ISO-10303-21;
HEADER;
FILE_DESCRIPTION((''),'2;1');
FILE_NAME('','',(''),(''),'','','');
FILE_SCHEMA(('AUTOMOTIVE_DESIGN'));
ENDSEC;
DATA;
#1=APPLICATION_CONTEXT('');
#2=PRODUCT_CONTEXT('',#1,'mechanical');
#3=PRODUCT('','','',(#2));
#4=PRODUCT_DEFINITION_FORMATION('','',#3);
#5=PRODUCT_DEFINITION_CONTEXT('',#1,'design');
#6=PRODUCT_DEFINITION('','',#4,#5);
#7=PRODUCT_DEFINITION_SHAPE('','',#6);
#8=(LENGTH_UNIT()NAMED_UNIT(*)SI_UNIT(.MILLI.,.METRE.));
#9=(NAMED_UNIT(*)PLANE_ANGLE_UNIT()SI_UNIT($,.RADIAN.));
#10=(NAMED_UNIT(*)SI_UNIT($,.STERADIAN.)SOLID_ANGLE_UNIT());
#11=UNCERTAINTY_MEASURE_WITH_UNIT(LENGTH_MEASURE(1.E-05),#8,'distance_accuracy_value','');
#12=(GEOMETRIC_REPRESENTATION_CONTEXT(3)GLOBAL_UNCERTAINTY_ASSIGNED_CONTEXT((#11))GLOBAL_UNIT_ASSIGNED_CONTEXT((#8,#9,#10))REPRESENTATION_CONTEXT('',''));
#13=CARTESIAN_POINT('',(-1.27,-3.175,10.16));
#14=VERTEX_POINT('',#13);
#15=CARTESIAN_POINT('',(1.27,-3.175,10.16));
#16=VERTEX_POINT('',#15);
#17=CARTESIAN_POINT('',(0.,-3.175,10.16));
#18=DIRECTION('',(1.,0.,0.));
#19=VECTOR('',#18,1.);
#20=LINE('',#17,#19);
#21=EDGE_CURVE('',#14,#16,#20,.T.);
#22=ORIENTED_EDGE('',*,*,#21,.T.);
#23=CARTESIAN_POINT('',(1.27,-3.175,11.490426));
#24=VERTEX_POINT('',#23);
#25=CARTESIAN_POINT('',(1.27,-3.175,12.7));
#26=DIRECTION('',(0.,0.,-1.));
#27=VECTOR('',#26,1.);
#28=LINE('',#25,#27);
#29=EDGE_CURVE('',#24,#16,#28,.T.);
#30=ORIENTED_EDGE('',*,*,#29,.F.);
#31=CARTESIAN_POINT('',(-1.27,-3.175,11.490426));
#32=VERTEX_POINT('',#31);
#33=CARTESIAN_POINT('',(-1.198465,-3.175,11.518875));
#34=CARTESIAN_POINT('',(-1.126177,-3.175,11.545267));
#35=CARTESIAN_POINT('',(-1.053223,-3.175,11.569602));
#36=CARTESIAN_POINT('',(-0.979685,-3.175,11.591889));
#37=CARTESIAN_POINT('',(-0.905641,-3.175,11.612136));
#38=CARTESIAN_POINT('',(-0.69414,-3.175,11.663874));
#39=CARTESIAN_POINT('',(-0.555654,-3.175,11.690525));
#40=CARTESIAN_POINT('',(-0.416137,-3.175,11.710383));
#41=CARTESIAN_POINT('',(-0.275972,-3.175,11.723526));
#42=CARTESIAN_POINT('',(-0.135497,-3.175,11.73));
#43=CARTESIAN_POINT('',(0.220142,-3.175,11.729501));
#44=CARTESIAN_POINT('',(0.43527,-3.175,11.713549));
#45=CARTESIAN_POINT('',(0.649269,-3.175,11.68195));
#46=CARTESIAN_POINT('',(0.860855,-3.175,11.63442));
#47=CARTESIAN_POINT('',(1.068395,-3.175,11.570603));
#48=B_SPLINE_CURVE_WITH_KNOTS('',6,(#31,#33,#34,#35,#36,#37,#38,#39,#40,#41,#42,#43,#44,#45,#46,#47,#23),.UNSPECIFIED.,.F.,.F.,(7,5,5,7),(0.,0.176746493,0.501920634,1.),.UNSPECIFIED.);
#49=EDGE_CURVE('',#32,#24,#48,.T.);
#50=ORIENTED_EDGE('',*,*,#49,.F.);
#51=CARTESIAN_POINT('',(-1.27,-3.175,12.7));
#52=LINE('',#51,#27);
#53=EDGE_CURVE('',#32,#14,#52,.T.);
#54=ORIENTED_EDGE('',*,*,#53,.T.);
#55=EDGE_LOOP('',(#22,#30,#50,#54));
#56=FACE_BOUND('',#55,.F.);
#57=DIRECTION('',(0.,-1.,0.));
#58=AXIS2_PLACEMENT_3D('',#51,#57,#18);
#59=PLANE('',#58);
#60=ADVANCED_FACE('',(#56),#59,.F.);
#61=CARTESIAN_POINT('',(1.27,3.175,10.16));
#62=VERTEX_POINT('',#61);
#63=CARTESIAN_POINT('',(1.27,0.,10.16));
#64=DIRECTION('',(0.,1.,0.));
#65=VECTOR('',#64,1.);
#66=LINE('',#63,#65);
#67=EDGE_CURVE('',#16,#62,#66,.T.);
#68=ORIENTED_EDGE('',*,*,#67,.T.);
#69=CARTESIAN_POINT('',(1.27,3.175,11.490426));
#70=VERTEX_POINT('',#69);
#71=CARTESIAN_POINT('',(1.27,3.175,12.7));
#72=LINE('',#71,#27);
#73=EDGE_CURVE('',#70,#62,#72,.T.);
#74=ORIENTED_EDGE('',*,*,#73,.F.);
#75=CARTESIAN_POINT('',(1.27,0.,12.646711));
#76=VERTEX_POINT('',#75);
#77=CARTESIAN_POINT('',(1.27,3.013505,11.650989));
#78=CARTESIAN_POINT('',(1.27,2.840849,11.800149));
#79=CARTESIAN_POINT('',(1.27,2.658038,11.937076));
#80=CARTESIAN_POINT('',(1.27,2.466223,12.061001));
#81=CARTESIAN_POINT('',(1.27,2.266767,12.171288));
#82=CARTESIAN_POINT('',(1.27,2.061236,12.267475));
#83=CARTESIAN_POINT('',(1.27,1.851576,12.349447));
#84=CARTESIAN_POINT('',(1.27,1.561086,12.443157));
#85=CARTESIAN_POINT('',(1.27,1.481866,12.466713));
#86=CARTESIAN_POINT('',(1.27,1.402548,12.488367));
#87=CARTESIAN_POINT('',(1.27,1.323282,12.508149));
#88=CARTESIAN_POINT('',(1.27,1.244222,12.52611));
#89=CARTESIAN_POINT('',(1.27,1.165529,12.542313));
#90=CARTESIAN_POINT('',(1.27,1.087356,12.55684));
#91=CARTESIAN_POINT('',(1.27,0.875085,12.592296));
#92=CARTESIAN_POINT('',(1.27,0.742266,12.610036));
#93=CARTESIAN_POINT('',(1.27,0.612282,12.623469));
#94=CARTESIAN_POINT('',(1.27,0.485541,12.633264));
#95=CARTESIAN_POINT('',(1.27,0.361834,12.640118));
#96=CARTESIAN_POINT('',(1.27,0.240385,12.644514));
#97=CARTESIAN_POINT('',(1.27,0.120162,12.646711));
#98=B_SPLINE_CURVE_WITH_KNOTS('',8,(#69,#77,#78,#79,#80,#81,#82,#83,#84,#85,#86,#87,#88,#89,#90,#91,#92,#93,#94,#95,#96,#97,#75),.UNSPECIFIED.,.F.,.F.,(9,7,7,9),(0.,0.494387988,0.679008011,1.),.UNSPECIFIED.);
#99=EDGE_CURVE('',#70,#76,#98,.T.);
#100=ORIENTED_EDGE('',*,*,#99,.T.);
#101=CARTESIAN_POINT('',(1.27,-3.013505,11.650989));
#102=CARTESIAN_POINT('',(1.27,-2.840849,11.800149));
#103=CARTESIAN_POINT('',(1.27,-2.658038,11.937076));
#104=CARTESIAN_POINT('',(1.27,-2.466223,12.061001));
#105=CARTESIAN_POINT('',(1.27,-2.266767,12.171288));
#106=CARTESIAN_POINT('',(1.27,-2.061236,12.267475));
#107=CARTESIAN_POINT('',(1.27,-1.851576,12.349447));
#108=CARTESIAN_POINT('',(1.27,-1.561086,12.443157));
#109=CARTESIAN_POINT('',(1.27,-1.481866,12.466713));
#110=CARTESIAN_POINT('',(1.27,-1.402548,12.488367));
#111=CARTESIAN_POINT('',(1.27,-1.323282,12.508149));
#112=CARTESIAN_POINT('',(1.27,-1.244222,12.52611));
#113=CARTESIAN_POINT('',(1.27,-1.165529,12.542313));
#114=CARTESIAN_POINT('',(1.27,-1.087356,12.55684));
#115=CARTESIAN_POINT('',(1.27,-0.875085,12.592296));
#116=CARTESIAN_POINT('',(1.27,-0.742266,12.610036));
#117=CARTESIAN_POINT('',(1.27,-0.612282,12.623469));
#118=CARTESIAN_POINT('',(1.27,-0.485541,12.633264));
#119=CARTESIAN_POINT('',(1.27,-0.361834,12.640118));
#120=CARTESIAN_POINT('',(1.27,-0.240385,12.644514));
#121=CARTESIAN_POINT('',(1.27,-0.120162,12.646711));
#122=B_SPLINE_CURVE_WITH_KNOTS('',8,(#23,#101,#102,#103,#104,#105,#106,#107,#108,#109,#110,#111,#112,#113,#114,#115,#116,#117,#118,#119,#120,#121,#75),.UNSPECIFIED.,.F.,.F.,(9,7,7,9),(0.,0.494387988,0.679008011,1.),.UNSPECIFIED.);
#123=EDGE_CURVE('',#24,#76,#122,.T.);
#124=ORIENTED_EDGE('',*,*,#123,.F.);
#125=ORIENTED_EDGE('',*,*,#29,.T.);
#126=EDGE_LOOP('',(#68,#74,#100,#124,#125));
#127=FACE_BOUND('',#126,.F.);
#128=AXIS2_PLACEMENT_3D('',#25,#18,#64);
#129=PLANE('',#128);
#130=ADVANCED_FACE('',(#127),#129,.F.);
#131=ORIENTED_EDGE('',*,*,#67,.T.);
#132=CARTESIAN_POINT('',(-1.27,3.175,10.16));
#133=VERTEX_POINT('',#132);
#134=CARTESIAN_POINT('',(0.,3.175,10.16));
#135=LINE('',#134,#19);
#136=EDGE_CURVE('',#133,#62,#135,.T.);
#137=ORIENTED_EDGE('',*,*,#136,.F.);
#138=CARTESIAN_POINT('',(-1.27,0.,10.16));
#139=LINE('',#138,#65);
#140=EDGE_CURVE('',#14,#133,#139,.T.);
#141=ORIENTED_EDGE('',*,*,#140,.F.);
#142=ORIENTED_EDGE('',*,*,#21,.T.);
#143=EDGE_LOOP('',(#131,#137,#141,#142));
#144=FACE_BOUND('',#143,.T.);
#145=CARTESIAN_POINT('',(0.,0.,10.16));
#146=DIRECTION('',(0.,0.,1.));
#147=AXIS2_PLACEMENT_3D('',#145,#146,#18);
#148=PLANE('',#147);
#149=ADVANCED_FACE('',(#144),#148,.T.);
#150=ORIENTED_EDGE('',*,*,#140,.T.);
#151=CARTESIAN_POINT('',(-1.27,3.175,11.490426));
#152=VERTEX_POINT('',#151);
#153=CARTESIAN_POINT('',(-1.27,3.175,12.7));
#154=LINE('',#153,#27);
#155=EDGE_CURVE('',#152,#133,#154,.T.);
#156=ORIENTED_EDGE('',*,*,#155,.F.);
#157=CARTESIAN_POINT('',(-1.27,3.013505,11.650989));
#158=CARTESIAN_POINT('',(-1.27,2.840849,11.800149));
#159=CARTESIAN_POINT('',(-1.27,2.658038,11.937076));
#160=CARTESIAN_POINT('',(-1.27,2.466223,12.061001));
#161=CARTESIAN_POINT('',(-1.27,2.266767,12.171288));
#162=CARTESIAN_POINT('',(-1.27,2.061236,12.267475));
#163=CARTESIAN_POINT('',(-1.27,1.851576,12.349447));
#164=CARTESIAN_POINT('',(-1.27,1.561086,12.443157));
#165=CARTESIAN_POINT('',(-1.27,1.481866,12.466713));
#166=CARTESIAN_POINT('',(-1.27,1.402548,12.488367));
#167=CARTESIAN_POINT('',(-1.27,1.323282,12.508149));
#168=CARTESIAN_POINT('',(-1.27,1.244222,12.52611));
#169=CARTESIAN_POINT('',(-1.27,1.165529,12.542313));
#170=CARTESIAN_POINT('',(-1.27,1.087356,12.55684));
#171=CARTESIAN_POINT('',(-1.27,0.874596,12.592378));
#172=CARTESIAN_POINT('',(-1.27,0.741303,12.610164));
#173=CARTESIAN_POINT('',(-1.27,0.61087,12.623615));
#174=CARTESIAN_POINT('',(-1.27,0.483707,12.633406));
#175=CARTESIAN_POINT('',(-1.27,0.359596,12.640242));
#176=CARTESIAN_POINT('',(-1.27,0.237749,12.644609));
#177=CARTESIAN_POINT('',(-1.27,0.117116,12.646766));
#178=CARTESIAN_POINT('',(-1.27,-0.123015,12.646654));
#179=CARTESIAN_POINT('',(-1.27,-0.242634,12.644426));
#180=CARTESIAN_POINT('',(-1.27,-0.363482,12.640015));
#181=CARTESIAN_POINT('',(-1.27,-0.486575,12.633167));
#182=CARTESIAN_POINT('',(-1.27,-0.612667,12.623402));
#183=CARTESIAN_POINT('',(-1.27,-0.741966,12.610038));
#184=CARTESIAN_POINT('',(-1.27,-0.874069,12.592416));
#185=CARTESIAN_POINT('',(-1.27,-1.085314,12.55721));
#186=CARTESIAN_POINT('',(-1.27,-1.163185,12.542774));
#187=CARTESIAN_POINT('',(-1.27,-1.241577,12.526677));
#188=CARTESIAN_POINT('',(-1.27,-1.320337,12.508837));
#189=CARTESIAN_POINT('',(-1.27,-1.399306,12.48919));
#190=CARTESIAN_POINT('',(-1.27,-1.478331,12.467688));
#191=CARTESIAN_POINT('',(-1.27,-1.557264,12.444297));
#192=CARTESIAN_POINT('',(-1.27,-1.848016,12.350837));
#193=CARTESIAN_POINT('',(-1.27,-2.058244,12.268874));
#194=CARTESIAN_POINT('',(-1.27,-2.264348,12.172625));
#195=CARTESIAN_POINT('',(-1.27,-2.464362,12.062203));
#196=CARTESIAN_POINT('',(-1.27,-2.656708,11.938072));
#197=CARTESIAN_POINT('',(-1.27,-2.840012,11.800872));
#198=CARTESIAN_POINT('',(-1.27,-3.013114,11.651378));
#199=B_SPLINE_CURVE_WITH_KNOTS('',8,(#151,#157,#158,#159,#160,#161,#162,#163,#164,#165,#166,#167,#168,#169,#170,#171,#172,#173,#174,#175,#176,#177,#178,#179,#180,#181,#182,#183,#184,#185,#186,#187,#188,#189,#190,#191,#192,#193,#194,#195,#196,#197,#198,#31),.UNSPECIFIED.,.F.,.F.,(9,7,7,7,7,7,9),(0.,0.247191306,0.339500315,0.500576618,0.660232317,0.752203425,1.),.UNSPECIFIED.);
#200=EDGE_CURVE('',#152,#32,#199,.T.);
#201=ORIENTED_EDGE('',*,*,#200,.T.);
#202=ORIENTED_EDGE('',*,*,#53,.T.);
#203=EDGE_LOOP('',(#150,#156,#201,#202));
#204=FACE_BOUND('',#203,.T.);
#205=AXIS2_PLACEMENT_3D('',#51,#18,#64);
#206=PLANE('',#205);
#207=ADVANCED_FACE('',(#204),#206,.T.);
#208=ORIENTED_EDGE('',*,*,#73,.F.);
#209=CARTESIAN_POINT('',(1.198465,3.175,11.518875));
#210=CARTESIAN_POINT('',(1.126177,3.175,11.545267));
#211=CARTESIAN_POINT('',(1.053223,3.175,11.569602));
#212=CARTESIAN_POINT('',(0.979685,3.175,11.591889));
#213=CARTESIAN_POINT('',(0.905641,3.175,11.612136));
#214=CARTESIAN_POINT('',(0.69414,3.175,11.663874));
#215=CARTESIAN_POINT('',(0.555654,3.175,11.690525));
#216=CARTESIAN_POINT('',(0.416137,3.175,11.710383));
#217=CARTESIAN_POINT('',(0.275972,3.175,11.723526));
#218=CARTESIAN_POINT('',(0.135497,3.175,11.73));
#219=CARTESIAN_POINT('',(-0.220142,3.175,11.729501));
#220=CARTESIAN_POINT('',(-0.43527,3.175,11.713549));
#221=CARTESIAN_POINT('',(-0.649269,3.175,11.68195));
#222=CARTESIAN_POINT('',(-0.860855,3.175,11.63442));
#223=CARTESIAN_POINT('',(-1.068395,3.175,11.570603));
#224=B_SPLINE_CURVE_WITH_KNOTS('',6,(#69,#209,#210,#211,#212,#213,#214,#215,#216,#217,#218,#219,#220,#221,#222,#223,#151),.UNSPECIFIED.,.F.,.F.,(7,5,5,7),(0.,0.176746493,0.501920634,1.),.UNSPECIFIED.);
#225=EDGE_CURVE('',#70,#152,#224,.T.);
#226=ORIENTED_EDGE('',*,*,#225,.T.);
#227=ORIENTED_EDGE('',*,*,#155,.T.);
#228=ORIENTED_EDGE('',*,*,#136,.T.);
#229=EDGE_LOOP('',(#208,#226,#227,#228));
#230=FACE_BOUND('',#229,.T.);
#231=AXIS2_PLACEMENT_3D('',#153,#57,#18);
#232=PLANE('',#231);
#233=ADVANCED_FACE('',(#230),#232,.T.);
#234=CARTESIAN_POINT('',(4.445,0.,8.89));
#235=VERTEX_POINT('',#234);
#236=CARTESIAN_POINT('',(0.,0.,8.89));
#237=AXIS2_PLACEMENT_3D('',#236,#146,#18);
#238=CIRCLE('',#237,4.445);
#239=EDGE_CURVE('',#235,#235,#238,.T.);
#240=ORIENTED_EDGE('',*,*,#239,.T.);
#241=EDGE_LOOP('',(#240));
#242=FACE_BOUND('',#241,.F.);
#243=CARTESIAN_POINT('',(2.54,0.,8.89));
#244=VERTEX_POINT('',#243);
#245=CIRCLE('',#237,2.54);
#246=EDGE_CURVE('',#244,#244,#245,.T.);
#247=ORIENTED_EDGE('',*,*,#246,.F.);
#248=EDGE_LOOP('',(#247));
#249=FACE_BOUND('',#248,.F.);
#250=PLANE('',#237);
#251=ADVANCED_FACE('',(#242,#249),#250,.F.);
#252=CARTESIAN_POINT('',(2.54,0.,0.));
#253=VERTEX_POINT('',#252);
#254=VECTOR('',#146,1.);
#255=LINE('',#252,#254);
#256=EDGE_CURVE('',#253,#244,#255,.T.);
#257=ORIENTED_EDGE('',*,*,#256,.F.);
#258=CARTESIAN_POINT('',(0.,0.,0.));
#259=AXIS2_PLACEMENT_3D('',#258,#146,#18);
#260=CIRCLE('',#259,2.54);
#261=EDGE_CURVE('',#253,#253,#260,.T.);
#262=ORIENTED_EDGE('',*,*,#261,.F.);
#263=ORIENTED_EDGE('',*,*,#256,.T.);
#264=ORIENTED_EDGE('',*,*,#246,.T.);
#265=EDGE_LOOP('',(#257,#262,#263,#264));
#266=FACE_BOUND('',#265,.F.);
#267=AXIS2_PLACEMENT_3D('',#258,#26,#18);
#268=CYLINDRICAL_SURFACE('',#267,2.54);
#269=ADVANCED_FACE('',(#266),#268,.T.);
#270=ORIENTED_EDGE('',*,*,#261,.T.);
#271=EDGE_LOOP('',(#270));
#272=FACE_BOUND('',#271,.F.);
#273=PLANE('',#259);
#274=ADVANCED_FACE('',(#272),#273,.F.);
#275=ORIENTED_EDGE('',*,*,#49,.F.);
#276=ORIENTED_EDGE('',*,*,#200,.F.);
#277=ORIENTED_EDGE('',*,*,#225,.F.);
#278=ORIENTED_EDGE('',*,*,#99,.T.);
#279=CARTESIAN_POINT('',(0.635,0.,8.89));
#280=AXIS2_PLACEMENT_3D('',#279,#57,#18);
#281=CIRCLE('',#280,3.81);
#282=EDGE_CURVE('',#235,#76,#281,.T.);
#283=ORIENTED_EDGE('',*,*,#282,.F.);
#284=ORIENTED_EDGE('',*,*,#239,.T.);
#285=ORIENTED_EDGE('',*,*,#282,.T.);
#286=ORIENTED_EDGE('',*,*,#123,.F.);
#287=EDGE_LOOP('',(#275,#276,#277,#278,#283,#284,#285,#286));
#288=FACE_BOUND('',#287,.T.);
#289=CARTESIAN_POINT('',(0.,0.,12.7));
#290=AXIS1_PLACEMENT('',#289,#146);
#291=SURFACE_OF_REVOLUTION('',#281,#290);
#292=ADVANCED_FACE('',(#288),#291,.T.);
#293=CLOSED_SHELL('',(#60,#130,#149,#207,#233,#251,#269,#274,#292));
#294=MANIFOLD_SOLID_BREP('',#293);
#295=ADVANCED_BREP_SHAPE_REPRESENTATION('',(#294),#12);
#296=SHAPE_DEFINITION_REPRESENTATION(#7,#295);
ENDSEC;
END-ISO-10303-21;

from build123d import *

# Parameters (mm, degrees)
F0_R     = 2.54
F1_DEPTH = 8.89
F2_R     = 4.445
F3_DEPTH = 3.81
F4_W     = 2.54
F4_H     = 6.35
F5_DEPTH = 2.54


# Not quite as in the source:
# - a fillet or chamfer that OpenCascade refuses, or shapes differently, is made with other operations: its cross-section is extruded or revolved along the edge and cut away or added


with BuildPart() as f1:
    # F0 (on Top) → F1 (new body)
    with BuildSketch(Plane.XY):
        Circle(F0_R)
    extrude(amount=F1_DEPTH)

    # F2 (on face) → F3 (join)
    with BuildSketch(Plane.XY.offset(8.89)):
        Circle(F2_R)
    extrude(amount=F3_DEPTH)

    # F4 (on face) → F5 (cut)
    with BuildSketch(Plane.XY.offset(12.7)):
        Rectangle(F4_W, F4_H)
    extrude(amount=-F5_DEPTH, mode=Mode.SUBTRACT)

    # F6: fillet of radius 3.81 on 1 edges, made by hand

    # F6_s1 → F6_t2 (revolve, cut)
    with BuildSketch(Plane.XZ):
        with BuildLine():
            ThreePointArc((4.445, 8.89), (3.3290768363, 11.5840768363), (0.635, 12.7))
            Line((0.635, 12.7), (4.445, 12.7))
            Line((4.445, 12.7), (4.445, 8.89))
        make_face()
    revolve(axis=Axis((0, 0, 12.7), (0, 0, 1)), mode=Mode.SUBTRACT)


solid = f1.part
